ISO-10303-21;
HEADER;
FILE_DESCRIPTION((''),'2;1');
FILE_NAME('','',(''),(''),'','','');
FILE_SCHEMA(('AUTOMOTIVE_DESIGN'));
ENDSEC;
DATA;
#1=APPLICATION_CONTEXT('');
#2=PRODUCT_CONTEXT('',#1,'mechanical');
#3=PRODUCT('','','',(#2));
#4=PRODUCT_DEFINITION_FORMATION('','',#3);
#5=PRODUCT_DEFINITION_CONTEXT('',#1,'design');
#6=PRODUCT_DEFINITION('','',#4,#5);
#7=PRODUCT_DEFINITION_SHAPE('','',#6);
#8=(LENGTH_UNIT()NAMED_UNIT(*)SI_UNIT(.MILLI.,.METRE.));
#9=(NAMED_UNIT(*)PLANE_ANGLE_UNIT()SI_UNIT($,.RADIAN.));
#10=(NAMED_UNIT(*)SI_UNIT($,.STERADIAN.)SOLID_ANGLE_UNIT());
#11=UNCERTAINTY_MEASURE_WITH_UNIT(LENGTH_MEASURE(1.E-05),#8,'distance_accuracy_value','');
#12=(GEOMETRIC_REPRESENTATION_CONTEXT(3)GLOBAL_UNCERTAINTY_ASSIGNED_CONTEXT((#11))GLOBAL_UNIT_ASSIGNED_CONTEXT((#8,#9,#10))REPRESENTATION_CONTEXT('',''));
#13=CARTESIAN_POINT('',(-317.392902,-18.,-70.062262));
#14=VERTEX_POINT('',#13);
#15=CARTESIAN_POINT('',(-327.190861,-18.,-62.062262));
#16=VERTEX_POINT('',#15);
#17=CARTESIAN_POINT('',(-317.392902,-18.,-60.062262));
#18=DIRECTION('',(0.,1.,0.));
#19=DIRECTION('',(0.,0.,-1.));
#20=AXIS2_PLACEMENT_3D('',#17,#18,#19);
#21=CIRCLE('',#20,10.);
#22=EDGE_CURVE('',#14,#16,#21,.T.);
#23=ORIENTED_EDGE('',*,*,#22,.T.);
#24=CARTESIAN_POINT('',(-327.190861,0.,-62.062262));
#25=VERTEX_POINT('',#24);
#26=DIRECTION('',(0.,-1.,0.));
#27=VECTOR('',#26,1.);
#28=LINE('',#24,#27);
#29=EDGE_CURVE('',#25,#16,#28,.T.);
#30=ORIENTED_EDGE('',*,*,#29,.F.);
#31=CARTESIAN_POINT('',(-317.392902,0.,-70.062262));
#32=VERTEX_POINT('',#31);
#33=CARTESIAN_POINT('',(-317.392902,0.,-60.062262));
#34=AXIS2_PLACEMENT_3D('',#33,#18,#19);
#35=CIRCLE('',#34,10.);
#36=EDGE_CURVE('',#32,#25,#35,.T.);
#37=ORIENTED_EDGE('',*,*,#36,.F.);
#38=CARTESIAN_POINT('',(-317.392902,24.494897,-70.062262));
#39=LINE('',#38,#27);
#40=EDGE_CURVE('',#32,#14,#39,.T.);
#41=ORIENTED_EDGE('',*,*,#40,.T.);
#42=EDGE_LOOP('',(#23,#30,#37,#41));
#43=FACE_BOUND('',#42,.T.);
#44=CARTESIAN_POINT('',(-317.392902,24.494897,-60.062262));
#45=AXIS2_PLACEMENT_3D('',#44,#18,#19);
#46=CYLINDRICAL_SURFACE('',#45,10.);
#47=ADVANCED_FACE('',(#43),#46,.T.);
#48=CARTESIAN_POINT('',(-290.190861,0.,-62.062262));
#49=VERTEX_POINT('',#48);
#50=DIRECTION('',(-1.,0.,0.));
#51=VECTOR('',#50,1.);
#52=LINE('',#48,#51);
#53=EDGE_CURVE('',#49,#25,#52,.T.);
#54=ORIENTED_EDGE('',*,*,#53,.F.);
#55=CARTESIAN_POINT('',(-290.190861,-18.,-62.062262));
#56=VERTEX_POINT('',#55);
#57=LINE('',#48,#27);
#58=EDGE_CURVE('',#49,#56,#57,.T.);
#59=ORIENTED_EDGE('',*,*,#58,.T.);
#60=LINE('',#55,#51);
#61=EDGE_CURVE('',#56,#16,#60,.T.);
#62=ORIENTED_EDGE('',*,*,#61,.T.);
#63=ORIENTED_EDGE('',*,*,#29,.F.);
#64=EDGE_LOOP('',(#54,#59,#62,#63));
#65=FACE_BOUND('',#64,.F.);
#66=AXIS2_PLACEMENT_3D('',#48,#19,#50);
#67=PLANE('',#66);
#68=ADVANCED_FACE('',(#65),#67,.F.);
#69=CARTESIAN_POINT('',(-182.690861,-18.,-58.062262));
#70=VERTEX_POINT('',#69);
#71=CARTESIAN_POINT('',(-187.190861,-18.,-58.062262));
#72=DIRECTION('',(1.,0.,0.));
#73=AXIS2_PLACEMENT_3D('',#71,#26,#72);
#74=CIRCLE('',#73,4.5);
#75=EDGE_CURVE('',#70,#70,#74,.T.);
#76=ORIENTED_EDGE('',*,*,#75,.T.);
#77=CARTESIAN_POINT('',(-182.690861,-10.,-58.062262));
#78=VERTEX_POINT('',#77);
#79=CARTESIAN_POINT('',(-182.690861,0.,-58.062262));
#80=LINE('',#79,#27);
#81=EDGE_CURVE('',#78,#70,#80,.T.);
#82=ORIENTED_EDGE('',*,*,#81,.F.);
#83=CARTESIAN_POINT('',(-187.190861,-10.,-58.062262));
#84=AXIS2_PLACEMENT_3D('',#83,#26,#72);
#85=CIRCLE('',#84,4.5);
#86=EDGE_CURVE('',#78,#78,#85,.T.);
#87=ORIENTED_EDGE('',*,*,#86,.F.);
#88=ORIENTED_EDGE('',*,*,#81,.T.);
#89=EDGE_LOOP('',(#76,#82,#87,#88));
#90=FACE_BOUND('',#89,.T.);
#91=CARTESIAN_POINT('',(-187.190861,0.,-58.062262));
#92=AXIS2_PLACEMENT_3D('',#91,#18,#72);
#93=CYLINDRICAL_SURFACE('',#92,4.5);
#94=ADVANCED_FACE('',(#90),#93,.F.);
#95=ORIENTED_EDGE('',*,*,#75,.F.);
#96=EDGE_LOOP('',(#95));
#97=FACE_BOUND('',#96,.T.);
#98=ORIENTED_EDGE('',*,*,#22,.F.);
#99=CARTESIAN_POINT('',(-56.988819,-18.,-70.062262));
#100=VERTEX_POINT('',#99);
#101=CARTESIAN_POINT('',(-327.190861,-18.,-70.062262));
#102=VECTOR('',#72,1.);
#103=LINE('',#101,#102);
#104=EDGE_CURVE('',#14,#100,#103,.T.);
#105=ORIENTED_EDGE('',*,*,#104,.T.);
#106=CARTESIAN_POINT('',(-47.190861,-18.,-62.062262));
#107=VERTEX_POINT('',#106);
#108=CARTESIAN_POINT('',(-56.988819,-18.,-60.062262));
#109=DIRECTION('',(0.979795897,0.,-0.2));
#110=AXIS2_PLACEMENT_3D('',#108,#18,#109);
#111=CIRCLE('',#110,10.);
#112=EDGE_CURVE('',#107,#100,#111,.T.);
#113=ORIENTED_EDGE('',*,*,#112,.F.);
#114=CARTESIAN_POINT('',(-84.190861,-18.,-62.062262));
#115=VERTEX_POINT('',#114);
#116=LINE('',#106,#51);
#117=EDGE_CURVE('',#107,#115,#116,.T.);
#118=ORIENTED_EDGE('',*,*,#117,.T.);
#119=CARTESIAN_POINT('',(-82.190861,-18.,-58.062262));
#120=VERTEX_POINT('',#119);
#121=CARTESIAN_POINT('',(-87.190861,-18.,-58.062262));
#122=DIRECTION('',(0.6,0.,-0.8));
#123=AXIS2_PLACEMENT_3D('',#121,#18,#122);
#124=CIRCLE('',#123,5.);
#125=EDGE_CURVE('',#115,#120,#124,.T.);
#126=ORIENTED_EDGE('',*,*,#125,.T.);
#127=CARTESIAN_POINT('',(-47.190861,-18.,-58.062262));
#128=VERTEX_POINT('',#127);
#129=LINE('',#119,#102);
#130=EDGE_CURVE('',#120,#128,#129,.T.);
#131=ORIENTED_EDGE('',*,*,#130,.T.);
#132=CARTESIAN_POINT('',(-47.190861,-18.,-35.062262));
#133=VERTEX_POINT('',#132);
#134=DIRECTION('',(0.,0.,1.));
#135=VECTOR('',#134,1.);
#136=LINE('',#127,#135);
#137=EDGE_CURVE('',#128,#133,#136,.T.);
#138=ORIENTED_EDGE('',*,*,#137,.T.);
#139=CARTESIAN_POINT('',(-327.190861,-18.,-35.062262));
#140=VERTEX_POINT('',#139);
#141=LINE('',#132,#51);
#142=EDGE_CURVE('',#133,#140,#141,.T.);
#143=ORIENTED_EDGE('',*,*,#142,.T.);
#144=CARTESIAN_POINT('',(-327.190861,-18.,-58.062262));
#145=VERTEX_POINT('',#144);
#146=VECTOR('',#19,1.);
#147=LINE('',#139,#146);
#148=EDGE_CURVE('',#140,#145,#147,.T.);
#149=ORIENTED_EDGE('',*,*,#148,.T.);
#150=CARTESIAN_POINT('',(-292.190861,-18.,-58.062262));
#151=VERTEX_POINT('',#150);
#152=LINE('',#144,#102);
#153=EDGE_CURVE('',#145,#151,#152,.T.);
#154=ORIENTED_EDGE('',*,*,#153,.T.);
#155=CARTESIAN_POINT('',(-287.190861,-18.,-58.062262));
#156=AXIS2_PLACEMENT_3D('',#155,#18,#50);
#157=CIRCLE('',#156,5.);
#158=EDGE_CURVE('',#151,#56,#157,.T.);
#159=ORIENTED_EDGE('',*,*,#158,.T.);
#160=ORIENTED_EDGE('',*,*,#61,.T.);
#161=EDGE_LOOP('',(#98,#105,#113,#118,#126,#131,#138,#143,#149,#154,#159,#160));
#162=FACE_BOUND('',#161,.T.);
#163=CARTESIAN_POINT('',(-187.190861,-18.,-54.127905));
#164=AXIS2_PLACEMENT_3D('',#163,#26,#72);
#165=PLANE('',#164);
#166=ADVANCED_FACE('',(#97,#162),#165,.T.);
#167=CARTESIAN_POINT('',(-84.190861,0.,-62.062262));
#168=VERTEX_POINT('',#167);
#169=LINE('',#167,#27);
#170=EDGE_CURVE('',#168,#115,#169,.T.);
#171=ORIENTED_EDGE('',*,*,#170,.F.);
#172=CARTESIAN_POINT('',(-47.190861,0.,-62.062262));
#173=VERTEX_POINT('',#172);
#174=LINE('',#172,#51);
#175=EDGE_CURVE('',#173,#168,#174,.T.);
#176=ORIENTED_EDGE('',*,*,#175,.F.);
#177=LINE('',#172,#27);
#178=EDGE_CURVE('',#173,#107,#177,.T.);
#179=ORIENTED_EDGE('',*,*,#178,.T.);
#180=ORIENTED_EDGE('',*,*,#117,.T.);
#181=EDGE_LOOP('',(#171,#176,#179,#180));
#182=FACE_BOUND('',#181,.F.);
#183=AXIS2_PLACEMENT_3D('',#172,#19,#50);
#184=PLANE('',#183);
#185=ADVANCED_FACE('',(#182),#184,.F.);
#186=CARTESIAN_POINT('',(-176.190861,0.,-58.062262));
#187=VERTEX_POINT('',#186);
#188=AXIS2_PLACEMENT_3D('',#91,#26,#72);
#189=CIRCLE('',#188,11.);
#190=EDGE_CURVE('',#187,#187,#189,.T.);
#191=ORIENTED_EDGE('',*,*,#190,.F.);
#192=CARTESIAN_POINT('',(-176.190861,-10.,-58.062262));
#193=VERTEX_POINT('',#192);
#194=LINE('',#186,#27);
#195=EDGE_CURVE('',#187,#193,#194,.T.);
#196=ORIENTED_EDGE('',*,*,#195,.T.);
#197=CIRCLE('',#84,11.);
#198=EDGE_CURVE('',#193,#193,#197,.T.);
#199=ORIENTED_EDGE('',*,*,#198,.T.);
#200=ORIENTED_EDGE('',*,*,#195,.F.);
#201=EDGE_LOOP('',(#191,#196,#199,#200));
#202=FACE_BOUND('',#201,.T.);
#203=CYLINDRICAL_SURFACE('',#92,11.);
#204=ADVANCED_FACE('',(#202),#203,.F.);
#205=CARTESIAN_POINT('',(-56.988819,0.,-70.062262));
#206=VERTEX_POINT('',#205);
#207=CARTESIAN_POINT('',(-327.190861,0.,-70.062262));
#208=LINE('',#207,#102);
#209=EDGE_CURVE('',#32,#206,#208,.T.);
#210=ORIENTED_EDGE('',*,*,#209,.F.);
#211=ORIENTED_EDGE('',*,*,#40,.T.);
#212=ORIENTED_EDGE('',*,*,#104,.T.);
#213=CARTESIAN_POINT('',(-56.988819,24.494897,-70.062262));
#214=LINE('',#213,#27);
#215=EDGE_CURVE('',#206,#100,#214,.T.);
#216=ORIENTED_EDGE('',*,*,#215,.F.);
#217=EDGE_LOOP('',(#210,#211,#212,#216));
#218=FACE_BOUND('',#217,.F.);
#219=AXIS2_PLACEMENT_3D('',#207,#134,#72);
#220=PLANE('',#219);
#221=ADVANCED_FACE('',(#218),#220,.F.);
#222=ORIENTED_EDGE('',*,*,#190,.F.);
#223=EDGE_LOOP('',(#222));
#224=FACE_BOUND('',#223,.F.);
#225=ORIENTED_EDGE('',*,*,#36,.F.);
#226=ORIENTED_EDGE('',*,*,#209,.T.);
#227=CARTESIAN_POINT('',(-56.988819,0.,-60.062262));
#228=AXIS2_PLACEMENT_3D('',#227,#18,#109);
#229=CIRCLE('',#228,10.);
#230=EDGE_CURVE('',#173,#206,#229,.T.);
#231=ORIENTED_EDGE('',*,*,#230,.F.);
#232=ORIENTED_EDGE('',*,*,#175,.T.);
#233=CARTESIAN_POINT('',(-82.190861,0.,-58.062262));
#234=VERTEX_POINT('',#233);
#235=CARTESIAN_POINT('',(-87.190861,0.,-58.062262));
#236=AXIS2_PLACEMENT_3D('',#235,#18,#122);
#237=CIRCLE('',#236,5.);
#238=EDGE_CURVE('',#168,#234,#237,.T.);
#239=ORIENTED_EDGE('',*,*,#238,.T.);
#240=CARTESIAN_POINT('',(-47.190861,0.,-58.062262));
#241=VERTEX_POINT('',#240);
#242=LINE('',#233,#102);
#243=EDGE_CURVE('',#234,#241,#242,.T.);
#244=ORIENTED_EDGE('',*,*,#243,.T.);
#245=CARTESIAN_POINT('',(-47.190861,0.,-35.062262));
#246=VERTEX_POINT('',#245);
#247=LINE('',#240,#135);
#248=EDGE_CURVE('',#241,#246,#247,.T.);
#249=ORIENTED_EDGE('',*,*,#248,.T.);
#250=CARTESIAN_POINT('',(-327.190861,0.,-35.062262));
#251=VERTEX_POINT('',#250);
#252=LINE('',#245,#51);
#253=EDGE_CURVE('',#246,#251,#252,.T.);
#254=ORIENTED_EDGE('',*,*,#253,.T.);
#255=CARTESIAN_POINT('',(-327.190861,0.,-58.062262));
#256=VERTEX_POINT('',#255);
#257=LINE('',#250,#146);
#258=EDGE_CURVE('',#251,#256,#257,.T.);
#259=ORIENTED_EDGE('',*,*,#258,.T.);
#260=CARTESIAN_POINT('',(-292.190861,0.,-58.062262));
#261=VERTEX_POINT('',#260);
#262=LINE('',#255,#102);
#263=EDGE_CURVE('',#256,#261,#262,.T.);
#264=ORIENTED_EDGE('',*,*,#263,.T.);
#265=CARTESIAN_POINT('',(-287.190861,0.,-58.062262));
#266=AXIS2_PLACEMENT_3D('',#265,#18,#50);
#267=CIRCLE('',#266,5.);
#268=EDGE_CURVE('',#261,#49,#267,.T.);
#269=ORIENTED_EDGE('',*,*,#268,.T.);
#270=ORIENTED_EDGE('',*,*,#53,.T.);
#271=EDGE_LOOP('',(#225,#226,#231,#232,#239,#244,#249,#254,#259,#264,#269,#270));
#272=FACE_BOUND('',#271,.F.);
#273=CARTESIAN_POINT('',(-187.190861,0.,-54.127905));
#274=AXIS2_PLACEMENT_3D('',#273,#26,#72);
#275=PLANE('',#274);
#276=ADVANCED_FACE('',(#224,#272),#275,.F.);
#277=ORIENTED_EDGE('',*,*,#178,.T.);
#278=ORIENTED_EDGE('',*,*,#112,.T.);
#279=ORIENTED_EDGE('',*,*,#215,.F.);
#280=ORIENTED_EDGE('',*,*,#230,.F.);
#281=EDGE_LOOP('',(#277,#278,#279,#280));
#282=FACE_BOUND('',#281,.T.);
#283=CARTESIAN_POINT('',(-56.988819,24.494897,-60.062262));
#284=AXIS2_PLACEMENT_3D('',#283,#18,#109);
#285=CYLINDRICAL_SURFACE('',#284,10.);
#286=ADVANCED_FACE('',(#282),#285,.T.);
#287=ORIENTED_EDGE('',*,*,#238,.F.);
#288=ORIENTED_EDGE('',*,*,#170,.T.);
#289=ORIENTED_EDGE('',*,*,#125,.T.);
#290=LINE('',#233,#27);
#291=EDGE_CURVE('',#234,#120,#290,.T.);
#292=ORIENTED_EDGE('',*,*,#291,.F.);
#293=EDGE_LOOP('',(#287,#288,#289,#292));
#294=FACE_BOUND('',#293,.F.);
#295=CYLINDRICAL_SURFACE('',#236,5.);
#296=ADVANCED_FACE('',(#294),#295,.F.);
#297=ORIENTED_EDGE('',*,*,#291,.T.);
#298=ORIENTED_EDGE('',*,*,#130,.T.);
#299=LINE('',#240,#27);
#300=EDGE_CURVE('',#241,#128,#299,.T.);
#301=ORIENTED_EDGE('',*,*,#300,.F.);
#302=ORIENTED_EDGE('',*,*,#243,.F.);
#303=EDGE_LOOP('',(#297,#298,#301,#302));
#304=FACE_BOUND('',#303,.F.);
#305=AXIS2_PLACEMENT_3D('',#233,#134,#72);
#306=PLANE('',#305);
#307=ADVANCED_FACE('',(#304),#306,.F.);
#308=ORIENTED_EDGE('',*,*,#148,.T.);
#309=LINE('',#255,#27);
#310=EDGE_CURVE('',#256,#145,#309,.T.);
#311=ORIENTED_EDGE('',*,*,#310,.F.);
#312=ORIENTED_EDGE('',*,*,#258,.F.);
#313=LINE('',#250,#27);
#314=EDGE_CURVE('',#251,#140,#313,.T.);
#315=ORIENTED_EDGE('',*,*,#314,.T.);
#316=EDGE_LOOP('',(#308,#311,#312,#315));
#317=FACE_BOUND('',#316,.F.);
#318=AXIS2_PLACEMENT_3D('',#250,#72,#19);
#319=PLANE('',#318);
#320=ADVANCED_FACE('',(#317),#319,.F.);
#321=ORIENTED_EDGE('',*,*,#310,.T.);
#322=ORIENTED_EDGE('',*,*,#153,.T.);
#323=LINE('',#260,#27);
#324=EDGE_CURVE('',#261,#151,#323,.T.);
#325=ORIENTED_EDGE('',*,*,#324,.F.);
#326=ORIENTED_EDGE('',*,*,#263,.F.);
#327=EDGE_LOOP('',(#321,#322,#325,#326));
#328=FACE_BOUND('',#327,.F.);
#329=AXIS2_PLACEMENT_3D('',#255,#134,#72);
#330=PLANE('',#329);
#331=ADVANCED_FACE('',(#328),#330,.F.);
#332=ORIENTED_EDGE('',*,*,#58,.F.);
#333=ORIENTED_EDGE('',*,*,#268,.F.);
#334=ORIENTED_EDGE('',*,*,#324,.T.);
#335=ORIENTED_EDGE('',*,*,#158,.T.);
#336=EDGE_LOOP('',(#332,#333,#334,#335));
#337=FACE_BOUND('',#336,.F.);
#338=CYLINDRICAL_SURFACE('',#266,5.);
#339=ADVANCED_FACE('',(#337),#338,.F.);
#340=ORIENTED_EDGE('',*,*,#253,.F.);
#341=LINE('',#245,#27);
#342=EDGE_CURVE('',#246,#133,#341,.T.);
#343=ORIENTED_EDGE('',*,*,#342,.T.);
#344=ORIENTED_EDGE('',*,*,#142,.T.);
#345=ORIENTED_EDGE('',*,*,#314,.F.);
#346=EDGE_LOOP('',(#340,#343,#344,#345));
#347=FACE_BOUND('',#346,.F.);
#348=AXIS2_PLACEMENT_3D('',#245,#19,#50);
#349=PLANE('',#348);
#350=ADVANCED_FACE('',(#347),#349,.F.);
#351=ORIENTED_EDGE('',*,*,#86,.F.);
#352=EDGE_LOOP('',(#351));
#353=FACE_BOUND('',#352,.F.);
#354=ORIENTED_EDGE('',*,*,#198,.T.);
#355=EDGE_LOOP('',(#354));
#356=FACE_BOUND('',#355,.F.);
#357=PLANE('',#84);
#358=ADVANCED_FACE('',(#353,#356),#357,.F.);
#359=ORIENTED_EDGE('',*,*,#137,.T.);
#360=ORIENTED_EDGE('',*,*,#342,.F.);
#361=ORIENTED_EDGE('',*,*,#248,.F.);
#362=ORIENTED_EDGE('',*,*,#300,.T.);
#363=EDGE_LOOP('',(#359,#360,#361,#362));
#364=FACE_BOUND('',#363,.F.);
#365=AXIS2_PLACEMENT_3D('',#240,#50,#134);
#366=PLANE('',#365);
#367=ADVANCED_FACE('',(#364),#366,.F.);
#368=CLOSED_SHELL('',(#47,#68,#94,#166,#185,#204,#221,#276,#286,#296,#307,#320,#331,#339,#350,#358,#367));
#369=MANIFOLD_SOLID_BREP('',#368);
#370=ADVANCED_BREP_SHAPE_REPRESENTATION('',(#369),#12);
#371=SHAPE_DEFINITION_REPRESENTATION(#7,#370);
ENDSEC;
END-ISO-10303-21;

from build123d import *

# Parameters (mm, degrees)
F0_R        = 11
F0_R_2      = 4.5
F1_DEPTH    = 18
F2_DEPTH    = 10
F3_T1_DEPTH = 66.9897948557


# Not quite as in the source:
# - a fillet or chamfer that OpenCascade refuses, or shapes differently, is made with other operations: its cross-section is extruded or revolved along the edge and cut away or added
# - a feature names something its author has since deleted; it is built from what else it names


with BuildPart() as f1:
    # F0 (on Front) → F1 (new body)
    with BuildSketch(Plane.XZ):
        with BuildLine():
            Line((-47.1908605099, -35.0622619203), (-327.1908605099, -35.0622619203))
            Line((-327.1908605099, -35.0622619203), (-327.1908605099, -58.0622619203))
            Line((-327.1908605099, -58.0622619203), (-292.1908605099, -58.0622619203))
            ThreePointArc((-292.1908605099, -58.0622619203), (-287.1908605099, -53.0622619203), (-282.1908605099, -58.0622619203))
            ThreePointArc((-282.1908605099, -58.0622619203), (-284.9547925324, -62.5343978753), (-290.1908605099, -62.0622619203))
            Line((-290.1908605099, -62.0622619203), (-327.1908605099, -62.0622619203))
            Line((-327.1908605099, -62.0622619203), (-327.1908605099, -70.0622619203))
            Line((-327.1908605099, -70.0622619203), (-47.1908605099, -70.0622619203))
            Line((-47.1908605099, -70.0622619203), (-47.1908605099, -62.0622619203))
            Line((-47.1908605099, -62.0622619203), (-84.1908605099, -62.0622619203))
            ThreePointArc((-84.1908605099, -62.0622619203), (-91.6629964649, -55.8261939428), (-82.1908605099, -58.0622619203))
            Line((-82.1908605099, -58.0622619203), (-47.1908605099, -58.0622619203))
            Line((-47.1908605099, -58.0622619203), (-47.1908605099, -35.0622619203))
        make_face()
        with Locations((-187.1908605099, -58.0622619203)):
            Circle(F0_R, mode=Mode.SUBTRACT)
        with Locations((-187.1908605099, -58.0622619203)):
            Circle(F0_R)
        with Locations((-187.1908605099, -58.0622619203)):
            Circle(F0_R_2, mode=Mode.SUBTRACT)
    extrude(amount=F1_DEPTH)

    # F0 (on Front) → F2 (cut)
    with BuildSketch(Plane.XZ):
        with Locations((-187.1908605099, -58.0622619203)):
            Circle(F0_R)
        with Locations((-187.1908605099, -58.0622619203)):
            Circle(F0_R_2, mode=Mode.SUBTRACT)
    extrude(amount=F2_DEPTH, mode=Mode.SUBTRACT)

    # F3: fillet of radius 10 on 2 edges, made by hand

    # F3_s2 → F3_t1 (cut)
    with BuildSketch(Plane.XZ.offset(-24.4948974278)):
        with BuildLine():
            ThreePointArc((-317.3929015387, -70.0622619203), (-323.7174568591, -67.8082286127), (-327.1908605099, -62.0622619203))
            Line((-327.1908605099, -62.0622619203), (-327.1908605099, -70.0622619203))
            Line((-327.1908605099, -70.0622619203), (-317.3929015387, -70.0622619203))
        make_face()
        with BuildLine():
            ThreePointArc((-47.1908605099, -62.0622619203), (-50.6642641607, -67.8082286127), (-56.988819481, -70.0622619203))
            Line((-56.988819481, -70.0622619203), (-47.1908605099, -70.0622619203))
            Line((-47.1908605099, -70.0622619203), (-47.1908605099, -62.0622619203))
        make_face()
    extrude(amount=F3_T1_DEPTH, mode=Mode.SUBTRACT)


solid = f1.part
